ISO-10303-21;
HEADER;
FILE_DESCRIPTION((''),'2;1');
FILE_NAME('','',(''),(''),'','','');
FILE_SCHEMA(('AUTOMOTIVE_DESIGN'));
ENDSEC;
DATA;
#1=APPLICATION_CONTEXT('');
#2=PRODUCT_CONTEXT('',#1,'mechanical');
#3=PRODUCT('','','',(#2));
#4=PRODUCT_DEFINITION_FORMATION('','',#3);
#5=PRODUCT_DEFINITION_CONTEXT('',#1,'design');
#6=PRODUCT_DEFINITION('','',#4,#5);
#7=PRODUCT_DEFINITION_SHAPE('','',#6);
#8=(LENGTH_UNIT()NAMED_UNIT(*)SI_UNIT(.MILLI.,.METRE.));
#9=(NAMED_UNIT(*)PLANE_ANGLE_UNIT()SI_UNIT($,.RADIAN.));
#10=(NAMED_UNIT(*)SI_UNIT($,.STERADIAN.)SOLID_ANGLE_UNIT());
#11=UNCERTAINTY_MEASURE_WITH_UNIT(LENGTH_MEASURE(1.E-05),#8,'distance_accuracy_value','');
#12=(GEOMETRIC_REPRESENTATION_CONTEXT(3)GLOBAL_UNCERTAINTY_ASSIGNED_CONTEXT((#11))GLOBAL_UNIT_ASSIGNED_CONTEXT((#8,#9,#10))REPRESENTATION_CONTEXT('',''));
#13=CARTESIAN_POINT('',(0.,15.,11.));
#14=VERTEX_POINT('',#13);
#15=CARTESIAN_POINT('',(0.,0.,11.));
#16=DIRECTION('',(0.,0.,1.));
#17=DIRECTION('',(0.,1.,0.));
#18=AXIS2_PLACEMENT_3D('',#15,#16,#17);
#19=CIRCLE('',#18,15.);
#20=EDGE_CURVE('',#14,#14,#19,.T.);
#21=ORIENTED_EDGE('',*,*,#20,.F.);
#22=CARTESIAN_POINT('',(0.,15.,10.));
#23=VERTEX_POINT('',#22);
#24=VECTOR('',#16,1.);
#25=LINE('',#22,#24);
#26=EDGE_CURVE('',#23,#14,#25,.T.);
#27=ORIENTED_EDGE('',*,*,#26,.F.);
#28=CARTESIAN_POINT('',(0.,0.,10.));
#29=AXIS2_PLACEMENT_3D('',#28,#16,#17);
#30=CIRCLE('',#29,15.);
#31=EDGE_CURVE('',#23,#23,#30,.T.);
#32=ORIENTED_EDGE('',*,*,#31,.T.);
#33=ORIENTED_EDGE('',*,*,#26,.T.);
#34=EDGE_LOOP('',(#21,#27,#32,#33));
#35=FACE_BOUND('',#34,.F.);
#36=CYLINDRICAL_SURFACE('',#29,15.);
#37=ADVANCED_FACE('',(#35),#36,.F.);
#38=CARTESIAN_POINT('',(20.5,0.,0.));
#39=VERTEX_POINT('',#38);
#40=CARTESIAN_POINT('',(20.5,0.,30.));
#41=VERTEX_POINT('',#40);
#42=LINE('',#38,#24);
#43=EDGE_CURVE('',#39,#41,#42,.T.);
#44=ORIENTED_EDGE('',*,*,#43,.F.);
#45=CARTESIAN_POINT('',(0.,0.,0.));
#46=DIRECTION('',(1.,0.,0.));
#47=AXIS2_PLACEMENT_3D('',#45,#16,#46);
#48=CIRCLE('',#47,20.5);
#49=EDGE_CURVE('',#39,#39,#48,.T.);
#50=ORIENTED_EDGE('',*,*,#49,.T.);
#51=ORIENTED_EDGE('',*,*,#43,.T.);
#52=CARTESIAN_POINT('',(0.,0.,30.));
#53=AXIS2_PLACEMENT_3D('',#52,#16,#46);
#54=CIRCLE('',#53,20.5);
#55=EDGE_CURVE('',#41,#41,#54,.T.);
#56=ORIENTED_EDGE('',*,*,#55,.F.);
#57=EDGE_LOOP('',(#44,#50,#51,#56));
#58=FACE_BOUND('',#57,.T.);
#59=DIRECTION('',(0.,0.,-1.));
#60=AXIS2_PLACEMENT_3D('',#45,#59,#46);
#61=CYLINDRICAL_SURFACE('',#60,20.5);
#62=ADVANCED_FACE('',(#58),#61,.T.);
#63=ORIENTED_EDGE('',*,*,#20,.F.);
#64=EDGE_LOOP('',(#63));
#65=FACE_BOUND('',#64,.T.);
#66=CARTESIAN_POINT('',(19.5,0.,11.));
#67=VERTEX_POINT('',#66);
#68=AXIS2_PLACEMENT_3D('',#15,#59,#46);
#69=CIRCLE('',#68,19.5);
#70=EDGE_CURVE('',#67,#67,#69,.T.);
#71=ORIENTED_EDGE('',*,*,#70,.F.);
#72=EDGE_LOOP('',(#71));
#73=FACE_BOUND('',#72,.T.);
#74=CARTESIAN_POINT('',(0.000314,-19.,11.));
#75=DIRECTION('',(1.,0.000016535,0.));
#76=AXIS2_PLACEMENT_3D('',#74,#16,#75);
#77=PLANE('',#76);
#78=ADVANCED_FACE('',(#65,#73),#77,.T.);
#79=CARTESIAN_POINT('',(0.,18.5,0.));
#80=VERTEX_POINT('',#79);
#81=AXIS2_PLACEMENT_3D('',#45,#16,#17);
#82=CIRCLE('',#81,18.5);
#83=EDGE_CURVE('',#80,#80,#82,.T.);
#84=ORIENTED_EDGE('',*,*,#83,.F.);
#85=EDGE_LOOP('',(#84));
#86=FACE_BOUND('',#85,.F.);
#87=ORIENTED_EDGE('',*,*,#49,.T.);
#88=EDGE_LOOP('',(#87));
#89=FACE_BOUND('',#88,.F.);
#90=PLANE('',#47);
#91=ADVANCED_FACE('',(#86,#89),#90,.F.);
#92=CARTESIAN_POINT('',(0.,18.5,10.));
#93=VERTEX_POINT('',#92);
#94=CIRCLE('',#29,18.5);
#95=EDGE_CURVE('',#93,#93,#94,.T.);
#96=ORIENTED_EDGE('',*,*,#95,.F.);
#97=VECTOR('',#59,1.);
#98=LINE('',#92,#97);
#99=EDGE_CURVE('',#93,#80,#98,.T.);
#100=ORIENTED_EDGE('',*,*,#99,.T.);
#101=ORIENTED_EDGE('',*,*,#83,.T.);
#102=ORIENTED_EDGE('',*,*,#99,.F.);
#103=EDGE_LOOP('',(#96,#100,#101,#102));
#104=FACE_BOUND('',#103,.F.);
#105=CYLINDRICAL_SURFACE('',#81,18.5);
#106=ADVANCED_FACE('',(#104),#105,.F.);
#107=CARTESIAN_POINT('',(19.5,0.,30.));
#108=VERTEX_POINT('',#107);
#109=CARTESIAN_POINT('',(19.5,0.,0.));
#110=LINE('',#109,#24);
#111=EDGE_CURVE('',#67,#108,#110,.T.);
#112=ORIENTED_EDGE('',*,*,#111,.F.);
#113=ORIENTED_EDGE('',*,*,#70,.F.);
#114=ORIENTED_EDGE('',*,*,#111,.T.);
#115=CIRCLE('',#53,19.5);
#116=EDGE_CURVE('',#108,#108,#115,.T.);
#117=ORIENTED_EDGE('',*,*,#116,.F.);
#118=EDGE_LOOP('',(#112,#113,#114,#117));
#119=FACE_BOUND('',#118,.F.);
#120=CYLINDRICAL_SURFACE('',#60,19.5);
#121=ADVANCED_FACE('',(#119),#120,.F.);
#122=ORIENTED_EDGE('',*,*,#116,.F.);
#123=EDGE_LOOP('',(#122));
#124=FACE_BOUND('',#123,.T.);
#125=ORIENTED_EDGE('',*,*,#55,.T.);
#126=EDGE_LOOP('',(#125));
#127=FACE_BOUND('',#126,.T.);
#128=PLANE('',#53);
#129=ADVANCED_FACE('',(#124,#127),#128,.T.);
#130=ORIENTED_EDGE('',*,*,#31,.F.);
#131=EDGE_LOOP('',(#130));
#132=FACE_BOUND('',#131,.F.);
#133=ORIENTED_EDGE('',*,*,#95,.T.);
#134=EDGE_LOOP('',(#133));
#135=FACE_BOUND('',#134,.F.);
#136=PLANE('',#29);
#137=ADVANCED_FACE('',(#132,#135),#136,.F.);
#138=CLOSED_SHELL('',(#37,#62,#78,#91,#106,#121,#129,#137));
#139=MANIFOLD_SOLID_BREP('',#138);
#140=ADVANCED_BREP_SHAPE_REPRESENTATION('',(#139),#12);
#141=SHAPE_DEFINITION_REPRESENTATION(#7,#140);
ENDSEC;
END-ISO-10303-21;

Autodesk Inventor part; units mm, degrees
ref_plane "YZ Plane" through (0, 0, 0) normal (1, 0, 0) x (0, 1, 0)
ref_plane "XZ Plane" through (0, 0, 0) normal (0, 1, 0) x (-1, 0, 0)
ref_plane "XY Plane" through (0, 0, 0) normal (0, 0, 1) x (1, 0, 0)
sketch "Sketch1" plane through (0, 0, 0) normal (0, 0, 1) x (1, 0, 0)
  circle A0 centre (0, 0) radius 20.5
  dimension "d0" = 41
extrude "Extrusion1" add sketch "Sketch1" along normal blind 30
sketch "Sketch2" plane through (0, 0, 0) normal (0, 0, -1) x (-1, 0, 0)
  point P0 (0, 0)
  point P1 (0, 0)
hole "Hole1" at (0, 0, 0) direction (0, 0, 1) diameter 37 depth 10
shell "Shell1" thickness 1 removed faces 1 at (3.5154, 4.1371, 30)
thread "Thread1" size "M39x4" class "6H" standard "ANSI Metric M Profile" full length
sketch "Sketch4" plane through (0, 0, 10) normal (0, 0, -1) x (-1, 0, 0)
  point P0 (0, 0)
  point P1 (0, 0)
hole "Hole2" at (0, 0, 10) direction (0, 0, 1) diameter 30 depth 30
properties part number "Tutup lampu" material "Aluminum 6061-AHC"
